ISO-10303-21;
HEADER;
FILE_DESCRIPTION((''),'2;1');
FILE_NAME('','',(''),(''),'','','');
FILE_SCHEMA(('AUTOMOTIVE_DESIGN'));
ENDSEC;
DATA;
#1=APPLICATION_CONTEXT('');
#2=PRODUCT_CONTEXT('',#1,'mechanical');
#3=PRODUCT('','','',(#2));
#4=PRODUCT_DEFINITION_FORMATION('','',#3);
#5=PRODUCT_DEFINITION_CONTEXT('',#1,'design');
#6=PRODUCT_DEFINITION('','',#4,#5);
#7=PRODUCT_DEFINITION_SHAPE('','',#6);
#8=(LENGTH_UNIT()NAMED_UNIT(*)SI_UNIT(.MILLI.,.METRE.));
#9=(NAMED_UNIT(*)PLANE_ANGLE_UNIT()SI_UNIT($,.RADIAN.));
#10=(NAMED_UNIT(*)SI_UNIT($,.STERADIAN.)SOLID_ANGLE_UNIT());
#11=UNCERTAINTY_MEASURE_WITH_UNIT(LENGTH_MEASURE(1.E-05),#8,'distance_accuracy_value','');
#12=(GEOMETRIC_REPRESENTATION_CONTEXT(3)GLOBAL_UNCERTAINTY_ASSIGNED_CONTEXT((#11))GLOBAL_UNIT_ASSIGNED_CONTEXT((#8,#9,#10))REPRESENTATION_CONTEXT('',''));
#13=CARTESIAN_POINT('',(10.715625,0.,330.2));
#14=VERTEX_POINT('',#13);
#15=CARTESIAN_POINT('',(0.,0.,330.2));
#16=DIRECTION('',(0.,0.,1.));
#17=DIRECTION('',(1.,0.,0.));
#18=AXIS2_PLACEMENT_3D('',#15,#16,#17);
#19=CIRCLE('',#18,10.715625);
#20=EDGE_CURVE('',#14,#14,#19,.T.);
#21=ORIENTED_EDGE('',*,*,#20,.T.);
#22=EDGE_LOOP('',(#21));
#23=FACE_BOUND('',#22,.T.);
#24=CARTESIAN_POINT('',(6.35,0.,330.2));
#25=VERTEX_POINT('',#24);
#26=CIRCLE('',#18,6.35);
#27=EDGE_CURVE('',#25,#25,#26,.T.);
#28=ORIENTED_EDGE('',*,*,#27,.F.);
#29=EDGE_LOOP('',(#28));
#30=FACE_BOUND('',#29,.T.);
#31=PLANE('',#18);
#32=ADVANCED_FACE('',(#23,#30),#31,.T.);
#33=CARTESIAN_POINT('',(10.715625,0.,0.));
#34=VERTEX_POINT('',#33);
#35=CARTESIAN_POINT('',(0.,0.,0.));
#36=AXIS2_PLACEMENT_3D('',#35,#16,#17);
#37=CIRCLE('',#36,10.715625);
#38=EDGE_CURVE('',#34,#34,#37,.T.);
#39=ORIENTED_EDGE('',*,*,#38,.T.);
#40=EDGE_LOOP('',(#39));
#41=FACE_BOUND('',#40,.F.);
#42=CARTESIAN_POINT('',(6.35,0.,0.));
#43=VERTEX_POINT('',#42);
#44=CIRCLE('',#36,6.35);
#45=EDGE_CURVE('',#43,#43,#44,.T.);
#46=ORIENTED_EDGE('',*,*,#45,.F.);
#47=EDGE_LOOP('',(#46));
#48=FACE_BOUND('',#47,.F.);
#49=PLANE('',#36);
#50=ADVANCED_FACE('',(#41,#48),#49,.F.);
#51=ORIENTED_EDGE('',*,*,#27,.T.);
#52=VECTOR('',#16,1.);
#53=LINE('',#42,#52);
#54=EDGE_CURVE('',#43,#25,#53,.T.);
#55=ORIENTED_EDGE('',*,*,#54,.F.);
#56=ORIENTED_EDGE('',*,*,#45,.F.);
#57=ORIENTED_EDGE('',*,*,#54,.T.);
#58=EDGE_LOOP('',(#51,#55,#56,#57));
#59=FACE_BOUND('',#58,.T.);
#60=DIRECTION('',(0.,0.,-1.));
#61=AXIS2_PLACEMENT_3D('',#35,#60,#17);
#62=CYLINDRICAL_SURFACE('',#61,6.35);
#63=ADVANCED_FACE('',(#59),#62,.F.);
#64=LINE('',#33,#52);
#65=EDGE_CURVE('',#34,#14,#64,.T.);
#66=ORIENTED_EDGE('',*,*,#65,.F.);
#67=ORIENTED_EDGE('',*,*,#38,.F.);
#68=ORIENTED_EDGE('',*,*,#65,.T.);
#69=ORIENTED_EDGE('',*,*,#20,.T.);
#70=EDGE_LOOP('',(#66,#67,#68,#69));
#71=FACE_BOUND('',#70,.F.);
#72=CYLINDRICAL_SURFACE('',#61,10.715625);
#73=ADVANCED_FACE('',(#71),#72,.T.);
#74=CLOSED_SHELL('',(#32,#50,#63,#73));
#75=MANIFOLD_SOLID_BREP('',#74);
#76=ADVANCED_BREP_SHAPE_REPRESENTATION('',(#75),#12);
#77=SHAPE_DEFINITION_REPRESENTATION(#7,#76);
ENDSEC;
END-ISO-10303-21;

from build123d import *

# Parameters (mm, degrees)
F1_R     = 10.715625
F1_R_2   = 6.35
F2_DEPTH = 330.2


# Not quite as in the source:
# - a variable given as a bare number and used for a length is read in inches; the dataset says mm whatever the document's units were


with BuildPart() as f2:
    # F1 (on Top) → F2 (new body)
    with BuildSketch(Plane.XY):
        Circle(F1_R)
        Circle(F1_R_2, mode=Mode.SUBTRACT)
    extrude(amount=F2_DEPTH)


solid = f2.part
